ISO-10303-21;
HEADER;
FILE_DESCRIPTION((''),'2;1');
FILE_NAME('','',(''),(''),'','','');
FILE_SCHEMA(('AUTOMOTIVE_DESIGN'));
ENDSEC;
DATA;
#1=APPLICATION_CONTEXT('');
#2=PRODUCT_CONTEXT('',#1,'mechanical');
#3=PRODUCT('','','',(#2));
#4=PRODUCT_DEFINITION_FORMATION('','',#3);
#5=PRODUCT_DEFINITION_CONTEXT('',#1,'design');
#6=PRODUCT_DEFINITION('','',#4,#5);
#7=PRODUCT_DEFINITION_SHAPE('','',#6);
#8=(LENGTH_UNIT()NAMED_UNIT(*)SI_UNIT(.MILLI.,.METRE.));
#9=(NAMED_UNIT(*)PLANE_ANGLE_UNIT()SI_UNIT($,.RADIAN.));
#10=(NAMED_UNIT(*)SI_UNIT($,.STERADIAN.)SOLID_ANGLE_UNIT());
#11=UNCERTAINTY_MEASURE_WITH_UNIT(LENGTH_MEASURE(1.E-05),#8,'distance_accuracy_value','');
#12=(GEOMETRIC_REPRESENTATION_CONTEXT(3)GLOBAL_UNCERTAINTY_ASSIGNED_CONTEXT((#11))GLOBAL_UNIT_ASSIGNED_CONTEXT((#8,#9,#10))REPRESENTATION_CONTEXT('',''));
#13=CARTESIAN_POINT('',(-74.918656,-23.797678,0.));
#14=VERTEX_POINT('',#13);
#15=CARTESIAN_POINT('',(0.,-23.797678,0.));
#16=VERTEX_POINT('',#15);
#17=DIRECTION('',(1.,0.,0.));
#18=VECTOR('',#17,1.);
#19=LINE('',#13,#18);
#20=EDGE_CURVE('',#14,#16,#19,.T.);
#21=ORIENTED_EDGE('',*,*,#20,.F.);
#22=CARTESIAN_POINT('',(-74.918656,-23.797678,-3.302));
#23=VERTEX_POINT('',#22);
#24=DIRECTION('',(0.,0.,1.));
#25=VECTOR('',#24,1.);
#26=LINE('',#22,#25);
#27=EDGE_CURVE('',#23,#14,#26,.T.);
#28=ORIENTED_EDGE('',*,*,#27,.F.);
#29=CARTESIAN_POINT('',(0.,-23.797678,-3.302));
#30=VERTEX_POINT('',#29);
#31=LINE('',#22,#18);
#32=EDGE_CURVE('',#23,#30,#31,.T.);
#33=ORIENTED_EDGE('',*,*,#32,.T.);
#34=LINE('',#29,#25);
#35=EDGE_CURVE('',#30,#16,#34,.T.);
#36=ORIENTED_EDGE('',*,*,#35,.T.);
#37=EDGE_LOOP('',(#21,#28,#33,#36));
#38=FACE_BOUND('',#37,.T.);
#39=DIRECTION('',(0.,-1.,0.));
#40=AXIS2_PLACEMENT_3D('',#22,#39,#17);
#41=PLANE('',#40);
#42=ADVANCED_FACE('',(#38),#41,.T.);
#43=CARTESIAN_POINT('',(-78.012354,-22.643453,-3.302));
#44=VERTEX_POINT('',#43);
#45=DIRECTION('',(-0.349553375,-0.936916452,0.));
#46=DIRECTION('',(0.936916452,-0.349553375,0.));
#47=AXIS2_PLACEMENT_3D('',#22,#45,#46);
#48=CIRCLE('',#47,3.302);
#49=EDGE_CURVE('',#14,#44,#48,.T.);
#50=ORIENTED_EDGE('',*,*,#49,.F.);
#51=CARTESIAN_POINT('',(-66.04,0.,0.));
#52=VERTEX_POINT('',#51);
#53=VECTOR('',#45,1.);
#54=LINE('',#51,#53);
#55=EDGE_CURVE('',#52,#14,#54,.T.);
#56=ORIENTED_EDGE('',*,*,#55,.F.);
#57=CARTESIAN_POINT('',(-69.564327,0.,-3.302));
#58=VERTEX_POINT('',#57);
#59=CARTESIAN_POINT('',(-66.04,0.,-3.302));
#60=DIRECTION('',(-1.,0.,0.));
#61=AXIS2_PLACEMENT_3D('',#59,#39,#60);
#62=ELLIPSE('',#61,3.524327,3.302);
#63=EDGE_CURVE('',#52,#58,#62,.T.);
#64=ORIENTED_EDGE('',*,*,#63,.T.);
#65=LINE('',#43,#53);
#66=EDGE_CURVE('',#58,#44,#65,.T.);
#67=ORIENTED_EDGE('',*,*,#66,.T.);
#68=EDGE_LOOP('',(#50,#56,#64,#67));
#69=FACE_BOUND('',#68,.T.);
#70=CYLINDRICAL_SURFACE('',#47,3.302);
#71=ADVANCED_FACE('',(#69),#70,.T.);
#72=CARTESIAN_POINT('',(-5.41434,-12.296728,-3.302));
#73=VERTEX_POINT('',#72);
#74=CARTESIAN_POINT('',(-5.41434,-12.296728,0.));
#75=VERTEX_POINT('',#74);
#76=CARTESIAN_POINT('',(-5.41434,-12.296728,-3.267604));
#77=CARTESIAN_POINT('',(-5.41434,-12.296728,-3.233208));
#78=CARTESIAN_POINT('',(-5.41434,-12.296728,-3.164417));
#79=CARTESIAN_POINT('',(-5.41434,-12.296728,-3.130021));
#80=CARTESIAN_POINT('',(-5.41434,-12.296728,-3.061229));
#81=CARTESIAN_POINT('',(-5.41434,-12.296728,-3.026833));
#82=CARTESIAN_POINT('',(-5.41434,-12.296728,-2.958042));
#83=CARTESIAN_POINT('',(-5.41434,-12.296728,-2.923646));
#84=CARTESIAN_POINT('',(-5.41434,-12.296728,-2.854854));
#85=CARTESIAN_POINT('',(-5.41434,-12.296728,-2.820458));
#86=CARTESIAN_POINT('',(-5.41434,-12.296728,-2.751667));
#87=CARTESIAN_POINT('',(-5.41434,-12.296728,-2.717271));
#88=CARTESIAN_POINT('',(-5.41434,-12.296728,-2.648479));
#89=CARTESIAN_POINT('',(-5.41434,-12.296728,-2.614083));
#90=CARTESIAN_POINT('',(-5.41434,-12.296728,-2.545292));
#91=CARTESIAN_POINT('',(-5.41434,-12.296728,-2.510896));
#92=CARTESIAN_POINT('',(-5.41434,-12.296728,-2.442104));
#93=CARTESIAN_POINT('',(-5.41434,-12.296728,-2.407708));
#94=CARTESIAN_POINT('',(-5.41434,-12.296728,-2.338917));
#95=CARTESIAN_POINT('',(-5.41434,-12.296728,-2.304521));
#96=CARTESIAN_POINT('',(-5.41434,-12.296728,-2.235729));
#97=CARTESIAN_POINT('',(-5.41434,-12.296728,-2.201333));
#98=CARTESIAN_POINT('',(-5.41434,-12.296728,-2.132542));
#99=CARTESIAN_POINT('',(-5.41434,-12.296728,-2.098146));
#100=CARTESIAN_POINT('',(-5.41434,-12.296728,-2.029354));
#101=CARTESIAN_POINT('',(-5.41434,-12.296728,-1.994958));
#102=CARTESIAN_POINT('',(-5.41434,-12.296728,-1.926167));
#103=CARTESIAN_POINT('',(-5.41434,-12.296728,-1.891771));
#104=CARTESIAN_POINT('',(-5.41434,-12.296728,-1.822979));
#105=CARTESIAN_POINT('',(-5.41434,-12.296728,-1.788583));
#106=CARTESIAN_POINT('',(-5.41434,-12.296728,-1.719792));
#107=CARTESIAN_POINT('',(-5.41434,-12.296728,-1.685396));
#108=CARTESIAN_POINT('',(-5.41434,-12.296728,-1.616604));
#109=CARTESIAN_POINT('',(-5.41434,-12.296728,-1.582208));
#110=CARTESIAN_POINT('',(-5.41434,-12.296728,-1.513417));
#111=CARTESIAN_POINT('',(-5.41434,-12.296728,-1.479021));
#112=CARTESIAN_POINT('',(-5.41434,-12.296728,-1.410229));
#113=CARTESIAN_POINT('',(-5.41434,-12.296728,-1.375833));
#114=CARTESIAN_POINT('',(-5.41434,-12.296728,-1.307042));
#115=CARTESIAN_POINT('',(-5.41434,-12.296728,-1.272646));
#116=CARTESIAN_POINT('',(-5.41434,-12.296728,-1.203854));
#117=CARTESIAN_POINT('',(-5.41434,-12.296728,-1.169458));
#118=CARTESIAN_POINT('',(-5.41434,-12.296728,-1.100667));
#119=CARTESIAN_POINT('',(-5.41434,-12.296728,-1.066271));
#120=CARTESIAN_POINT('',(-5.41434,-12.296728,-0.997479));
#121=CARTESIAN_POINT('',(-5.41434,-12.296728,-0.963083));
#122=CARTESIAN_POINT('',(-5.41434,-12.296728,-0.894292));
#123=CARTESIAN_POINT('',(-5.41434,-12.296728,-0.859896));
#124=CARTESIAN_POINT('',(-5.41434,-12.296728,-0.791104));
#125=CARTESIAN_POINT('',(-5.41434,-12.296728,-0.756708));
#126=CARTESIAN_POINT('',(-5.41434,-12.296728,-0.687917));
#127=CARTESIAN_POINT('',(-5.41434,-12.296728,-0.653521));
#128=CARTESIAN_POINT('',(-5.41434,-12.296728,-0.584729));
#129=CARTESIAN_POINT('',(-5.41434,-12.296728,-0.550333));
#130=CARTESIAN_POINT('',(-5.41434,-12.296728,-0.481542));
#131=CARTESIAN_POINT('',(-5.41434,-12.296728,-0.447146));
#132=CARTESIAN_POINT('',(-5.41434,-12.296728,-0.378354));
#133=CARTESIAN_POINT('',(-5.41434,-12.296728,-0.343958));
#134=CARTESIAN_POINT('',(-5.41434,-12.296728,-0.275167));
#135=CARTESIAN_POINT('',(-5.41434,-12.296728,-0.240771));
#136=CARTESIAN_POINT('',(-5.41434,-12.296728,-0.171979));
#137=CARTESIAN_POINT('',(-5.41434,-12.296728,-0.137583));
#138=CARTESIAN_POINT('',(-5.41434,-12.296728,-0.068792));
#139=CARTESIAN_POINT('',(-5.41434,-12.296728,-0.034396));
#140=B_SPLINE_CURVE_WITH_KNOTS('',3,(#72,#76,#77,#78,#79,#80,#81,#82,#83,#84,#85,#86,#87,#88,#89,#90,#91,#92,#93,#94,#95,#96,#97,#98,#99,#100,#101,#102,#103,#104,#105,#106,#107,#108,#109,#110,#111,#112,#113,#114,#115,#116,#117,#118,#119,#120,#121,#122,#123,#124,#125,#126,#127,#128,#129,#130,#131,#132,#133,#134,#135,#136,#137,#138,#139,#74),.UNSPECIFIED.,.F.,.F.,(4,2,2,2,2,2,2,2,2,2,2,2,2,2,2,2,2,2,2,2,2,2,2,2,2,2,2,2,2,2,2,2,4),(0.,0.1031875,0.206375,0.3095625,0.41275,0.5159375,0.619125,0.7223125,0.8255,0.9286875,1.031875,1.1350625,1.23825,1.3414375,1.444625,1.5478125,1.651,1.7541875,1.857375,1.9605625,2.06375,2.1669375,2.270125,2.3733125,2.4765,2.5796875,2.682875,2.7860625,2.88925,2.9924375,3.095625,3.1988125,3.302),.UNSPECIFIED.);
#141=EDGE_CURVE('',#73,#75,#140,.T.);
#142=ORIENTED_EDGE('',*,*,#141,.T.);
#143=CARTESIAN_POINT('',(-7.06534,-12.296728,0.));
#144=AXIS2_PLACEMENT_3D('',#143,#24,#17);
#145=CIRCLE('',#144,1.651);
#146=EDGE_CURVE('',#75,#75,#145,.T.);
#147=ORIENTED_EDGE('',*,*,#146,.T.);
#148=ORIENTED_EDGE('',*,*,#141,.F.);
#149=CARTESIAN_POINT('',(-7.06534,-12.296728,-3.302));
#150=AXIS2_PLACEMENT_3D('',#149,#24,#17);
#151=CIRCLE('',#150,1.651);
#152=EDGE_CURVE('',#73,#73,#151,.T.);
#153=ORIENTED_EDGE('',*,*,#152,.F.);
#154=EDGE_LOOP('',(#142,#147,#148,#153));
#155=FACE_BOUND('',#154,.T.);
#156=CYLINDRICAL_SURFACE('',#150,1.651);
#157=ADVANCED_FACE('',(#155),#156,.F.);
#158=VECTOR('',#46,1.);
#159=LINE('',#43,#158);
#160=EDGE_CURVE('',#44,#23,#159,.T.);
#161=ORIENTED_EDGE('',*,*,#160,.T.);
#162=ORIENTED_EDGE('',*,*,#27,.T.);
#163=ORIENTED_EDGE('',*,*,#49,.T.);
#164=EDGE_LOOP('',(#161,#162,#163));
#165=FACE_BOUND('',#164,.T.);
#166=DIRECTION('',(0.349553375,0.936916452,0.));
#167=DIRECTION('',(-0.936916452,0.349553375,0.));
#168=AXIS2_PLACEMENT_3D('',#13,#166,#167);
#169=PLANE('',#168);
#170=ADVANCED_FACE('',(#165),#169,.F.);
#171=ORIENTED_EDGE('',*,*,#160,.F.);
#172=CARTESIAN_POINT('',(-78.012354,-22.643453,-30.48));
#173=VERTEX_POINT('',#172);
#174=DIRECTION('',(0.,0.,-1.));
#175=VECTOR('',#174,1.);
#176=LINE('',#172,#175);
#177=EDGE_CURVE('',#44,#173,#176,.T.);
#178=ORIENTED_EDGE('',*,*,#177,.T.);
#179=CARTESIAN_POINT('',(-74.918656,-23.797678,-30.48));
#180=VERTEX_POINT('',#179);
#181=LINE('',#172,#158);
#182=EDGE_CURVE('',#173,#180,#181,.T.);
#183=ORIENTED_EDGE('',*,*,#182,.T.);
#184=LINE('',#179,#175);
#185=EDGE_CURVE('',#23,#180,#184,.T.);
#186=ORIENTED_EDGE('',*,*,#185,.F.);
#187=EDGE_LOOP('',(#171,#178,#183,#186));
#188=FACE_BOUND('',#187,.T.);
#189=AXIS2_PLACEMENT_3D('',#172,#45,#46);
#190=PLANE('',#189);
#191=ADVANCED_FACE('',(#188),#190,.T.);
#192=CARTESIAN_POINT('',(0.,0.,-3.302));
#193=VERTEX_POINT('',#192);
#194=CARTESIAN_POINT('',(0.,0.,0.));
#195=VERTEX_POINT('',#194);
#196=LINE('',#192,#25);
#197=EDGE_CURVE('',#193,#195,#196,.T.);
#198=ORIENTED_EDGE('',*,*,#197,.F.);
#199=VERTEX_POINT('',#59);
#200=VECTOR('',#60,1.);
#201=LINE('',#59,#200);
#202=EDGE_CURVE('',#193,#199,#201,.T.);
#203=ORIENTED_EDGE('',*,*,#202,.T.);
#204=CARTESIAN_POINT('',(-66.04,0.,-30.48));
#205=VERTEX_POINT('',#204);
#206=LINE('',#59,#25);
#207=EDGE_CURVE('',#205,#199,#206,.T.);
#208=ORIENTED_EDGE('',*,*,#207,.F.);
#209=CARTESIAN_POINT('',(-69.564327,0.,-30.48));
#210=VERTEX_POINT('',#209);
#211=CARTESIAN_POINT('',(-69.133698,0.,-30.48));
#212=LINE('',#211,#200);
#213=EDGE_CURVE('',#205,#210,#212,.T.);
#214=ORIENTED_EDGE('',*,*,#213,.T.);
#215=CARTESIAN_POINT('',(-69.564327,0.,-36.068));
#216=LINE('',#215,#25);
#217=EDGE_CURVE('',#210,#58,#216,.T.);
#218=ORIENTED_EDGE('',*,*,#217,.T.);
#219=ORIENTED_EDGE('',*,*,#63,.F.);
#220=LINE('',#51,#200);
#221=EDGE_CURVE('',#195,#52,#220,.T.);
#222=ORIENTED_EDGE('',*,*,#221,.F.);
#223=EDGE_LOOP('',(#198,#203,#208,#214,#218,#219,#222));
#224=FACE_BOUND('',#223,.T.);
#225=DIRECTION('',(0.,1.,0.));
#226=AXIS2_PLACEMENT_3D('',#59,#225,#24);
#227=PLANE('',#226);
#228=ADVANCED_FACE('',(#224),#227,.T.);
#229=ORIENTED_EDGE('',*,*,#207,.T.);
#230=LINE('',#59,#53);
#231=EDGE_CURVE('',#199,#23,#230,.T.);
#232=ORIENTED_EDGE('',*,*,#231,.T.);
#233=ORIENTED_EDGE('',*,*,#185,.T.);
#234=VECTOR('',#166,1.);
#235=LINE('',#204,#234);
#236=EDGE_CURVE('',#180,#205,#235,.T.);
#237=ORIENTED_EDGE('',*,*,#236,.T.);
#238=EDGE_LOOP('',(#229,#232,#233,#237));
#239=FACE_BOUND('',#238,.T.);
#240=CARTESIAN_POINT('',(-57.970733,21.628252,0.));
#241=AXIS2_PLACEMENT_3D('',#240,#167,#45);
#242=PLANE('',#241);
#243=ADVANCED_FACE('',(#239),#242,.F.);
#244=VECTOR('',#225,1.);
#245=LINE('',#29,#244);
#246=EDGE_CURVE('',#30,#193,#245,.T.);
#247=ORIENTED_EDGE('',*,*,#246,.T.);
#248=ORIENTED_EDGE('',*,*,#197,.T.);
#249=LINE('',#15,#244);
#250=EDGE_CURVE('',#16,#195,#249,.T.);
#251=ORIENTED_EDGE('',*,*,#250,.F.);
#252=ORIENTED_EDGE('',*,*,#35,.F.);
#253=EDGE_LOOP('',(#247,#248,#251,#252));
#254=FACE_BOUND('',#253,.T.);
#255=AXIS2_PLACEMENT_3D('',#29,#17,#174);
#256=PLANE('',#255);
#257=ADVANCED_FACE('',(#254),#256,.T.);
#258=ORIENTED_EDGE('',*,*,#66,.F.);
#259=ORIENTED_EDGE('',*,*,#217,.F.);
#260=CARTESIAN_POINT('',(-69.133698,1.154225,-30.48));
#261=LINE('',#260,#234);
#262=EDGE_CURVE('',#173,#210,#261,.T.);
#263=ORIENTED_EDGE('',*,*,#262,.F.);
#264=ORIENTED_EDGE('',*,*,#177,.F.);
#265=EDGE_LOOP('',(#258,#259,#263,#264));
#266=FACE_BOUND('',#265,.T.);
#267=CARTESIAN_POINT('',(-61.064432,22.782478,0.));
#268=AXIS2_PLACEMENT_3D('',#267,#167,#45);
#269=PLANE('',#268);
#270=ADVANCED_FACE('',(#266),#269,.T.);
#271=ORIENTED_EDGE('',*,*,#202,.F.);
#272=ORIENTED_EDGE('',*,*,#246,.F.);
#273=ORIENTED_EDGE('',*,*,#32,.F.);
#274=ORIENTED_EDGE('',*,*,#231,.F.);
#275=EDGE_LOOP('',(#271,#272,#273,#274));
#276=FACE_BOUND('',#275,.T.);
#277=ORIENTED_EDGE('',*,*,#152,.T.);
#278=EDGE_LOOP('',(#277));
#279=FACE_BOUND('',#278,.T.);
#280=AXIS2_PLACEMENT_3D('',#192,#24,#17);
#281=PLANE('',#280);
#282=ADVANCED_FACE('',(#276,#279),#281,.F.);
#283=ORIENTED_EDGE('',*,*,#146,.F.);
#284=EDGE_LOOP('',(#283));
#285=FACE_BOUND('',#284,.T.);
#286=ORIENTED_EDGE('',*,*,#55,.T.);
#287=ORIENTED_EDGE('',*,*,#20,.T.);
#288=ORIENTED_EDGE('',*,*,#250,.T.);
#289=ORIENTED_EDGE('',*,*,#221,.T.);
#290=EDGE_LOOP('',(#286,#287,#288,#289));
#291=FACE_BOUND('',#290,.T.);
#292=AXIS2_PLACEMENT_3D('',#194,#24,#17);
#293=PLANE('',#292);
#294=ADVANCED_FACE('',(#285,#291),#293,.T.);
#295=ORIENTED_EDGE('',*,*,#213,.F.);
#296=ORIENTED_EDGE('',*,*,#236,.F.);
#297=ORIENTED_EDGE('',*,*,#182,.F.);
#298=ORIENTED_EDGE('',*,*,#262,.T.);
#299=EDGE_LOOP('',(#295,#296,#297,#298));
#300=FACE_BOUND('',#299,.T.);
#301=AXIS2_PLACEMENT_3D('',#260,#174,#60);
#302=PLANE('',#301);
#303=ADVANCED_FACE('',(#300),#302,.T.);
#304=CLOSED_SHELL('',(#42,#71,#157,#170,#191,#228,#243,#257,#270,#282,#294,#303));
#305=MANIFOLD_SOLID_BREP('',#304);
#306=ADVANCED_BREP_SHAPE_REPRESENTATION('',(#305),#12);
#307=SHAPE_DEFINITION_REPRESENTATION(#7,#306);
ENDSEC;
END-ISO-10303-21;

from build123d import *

# Parameters (mm, degrees)
SKETCH13_R              = 1.651
BASE_FLANGE5_DEPTH      = 3.302
EDGE_FLANGE4_START      = -48.484504913
EDGE_FLANGE4_DEPTH      = 25.4
CUT_EXTRUDE4_DEPTH      = 4.699
CUT_EXTRUDE4_DEPTH_BACK = 36.068


# Read off the part's stored shape, not the designer's step: Edge-Flange4
# Sheet-metal steps are written as plain solids
with BuildPart() as part:
    # Sketch13 → Base-Flange5 (new body)
    with BuildSketch(Plane.XY):
        Polygon((-66.04, 0), (0, 0), (0, -23.797677877), (-74.918655736, -23.797677877), align=None)
        with Locations((-7.065339848, -12.296727665)):
            Circle(SKETCH13_R, mode=Mode.SUBTRACT)
    extrude(amount=-BASE_FLANGE5_DEPTH)

    # Edge-Flange4 outline → Edge-Flange4 (add)
    with BuildSketch(Plane(origin=(0, 0, 0), x_dir=(0.9369164518419233, -0.34955337542060905, 0), z_dir=(0.34955337542060905, 0.9369164518419232, 0)).offset(EDGE_FLANGE4_START)):
        with BuildLine():
            ThreePointArc((-65.17596248, 3.302), (-64.208829071, 0.967133409), (-61.87396248, 0))
            Line((-61.87396248, 0), (-61.87396248, 30.48))
            Line((-61.87396248, 30.48), (-65.17596248, 30.48))
            Line((-65.17596248, 30.48), (-65.17596248, 3.302))
        make_face()
    extrude(amount=EDGE_FLANGE4_DEPTH)

    # Sketch51 → Cut-Extrude4 (cut, two sides: drawn at the far end of the back side and taken through both)
    with BuildSketch(Plane.XY.offset(-CUT_EXTRUDE4_DEPTH_BACK)):
        Polygon((-66.04, 0), (-69.564327056, 0), (-69.133698124, 1.154225246), align=None)
    extrude(amount=CUT_EXTRUDE4_DEPTH + CUT_EXTRUDE4_DEPTH_BACK, mode=Mode.SUBTRACT)


solid = part.part
